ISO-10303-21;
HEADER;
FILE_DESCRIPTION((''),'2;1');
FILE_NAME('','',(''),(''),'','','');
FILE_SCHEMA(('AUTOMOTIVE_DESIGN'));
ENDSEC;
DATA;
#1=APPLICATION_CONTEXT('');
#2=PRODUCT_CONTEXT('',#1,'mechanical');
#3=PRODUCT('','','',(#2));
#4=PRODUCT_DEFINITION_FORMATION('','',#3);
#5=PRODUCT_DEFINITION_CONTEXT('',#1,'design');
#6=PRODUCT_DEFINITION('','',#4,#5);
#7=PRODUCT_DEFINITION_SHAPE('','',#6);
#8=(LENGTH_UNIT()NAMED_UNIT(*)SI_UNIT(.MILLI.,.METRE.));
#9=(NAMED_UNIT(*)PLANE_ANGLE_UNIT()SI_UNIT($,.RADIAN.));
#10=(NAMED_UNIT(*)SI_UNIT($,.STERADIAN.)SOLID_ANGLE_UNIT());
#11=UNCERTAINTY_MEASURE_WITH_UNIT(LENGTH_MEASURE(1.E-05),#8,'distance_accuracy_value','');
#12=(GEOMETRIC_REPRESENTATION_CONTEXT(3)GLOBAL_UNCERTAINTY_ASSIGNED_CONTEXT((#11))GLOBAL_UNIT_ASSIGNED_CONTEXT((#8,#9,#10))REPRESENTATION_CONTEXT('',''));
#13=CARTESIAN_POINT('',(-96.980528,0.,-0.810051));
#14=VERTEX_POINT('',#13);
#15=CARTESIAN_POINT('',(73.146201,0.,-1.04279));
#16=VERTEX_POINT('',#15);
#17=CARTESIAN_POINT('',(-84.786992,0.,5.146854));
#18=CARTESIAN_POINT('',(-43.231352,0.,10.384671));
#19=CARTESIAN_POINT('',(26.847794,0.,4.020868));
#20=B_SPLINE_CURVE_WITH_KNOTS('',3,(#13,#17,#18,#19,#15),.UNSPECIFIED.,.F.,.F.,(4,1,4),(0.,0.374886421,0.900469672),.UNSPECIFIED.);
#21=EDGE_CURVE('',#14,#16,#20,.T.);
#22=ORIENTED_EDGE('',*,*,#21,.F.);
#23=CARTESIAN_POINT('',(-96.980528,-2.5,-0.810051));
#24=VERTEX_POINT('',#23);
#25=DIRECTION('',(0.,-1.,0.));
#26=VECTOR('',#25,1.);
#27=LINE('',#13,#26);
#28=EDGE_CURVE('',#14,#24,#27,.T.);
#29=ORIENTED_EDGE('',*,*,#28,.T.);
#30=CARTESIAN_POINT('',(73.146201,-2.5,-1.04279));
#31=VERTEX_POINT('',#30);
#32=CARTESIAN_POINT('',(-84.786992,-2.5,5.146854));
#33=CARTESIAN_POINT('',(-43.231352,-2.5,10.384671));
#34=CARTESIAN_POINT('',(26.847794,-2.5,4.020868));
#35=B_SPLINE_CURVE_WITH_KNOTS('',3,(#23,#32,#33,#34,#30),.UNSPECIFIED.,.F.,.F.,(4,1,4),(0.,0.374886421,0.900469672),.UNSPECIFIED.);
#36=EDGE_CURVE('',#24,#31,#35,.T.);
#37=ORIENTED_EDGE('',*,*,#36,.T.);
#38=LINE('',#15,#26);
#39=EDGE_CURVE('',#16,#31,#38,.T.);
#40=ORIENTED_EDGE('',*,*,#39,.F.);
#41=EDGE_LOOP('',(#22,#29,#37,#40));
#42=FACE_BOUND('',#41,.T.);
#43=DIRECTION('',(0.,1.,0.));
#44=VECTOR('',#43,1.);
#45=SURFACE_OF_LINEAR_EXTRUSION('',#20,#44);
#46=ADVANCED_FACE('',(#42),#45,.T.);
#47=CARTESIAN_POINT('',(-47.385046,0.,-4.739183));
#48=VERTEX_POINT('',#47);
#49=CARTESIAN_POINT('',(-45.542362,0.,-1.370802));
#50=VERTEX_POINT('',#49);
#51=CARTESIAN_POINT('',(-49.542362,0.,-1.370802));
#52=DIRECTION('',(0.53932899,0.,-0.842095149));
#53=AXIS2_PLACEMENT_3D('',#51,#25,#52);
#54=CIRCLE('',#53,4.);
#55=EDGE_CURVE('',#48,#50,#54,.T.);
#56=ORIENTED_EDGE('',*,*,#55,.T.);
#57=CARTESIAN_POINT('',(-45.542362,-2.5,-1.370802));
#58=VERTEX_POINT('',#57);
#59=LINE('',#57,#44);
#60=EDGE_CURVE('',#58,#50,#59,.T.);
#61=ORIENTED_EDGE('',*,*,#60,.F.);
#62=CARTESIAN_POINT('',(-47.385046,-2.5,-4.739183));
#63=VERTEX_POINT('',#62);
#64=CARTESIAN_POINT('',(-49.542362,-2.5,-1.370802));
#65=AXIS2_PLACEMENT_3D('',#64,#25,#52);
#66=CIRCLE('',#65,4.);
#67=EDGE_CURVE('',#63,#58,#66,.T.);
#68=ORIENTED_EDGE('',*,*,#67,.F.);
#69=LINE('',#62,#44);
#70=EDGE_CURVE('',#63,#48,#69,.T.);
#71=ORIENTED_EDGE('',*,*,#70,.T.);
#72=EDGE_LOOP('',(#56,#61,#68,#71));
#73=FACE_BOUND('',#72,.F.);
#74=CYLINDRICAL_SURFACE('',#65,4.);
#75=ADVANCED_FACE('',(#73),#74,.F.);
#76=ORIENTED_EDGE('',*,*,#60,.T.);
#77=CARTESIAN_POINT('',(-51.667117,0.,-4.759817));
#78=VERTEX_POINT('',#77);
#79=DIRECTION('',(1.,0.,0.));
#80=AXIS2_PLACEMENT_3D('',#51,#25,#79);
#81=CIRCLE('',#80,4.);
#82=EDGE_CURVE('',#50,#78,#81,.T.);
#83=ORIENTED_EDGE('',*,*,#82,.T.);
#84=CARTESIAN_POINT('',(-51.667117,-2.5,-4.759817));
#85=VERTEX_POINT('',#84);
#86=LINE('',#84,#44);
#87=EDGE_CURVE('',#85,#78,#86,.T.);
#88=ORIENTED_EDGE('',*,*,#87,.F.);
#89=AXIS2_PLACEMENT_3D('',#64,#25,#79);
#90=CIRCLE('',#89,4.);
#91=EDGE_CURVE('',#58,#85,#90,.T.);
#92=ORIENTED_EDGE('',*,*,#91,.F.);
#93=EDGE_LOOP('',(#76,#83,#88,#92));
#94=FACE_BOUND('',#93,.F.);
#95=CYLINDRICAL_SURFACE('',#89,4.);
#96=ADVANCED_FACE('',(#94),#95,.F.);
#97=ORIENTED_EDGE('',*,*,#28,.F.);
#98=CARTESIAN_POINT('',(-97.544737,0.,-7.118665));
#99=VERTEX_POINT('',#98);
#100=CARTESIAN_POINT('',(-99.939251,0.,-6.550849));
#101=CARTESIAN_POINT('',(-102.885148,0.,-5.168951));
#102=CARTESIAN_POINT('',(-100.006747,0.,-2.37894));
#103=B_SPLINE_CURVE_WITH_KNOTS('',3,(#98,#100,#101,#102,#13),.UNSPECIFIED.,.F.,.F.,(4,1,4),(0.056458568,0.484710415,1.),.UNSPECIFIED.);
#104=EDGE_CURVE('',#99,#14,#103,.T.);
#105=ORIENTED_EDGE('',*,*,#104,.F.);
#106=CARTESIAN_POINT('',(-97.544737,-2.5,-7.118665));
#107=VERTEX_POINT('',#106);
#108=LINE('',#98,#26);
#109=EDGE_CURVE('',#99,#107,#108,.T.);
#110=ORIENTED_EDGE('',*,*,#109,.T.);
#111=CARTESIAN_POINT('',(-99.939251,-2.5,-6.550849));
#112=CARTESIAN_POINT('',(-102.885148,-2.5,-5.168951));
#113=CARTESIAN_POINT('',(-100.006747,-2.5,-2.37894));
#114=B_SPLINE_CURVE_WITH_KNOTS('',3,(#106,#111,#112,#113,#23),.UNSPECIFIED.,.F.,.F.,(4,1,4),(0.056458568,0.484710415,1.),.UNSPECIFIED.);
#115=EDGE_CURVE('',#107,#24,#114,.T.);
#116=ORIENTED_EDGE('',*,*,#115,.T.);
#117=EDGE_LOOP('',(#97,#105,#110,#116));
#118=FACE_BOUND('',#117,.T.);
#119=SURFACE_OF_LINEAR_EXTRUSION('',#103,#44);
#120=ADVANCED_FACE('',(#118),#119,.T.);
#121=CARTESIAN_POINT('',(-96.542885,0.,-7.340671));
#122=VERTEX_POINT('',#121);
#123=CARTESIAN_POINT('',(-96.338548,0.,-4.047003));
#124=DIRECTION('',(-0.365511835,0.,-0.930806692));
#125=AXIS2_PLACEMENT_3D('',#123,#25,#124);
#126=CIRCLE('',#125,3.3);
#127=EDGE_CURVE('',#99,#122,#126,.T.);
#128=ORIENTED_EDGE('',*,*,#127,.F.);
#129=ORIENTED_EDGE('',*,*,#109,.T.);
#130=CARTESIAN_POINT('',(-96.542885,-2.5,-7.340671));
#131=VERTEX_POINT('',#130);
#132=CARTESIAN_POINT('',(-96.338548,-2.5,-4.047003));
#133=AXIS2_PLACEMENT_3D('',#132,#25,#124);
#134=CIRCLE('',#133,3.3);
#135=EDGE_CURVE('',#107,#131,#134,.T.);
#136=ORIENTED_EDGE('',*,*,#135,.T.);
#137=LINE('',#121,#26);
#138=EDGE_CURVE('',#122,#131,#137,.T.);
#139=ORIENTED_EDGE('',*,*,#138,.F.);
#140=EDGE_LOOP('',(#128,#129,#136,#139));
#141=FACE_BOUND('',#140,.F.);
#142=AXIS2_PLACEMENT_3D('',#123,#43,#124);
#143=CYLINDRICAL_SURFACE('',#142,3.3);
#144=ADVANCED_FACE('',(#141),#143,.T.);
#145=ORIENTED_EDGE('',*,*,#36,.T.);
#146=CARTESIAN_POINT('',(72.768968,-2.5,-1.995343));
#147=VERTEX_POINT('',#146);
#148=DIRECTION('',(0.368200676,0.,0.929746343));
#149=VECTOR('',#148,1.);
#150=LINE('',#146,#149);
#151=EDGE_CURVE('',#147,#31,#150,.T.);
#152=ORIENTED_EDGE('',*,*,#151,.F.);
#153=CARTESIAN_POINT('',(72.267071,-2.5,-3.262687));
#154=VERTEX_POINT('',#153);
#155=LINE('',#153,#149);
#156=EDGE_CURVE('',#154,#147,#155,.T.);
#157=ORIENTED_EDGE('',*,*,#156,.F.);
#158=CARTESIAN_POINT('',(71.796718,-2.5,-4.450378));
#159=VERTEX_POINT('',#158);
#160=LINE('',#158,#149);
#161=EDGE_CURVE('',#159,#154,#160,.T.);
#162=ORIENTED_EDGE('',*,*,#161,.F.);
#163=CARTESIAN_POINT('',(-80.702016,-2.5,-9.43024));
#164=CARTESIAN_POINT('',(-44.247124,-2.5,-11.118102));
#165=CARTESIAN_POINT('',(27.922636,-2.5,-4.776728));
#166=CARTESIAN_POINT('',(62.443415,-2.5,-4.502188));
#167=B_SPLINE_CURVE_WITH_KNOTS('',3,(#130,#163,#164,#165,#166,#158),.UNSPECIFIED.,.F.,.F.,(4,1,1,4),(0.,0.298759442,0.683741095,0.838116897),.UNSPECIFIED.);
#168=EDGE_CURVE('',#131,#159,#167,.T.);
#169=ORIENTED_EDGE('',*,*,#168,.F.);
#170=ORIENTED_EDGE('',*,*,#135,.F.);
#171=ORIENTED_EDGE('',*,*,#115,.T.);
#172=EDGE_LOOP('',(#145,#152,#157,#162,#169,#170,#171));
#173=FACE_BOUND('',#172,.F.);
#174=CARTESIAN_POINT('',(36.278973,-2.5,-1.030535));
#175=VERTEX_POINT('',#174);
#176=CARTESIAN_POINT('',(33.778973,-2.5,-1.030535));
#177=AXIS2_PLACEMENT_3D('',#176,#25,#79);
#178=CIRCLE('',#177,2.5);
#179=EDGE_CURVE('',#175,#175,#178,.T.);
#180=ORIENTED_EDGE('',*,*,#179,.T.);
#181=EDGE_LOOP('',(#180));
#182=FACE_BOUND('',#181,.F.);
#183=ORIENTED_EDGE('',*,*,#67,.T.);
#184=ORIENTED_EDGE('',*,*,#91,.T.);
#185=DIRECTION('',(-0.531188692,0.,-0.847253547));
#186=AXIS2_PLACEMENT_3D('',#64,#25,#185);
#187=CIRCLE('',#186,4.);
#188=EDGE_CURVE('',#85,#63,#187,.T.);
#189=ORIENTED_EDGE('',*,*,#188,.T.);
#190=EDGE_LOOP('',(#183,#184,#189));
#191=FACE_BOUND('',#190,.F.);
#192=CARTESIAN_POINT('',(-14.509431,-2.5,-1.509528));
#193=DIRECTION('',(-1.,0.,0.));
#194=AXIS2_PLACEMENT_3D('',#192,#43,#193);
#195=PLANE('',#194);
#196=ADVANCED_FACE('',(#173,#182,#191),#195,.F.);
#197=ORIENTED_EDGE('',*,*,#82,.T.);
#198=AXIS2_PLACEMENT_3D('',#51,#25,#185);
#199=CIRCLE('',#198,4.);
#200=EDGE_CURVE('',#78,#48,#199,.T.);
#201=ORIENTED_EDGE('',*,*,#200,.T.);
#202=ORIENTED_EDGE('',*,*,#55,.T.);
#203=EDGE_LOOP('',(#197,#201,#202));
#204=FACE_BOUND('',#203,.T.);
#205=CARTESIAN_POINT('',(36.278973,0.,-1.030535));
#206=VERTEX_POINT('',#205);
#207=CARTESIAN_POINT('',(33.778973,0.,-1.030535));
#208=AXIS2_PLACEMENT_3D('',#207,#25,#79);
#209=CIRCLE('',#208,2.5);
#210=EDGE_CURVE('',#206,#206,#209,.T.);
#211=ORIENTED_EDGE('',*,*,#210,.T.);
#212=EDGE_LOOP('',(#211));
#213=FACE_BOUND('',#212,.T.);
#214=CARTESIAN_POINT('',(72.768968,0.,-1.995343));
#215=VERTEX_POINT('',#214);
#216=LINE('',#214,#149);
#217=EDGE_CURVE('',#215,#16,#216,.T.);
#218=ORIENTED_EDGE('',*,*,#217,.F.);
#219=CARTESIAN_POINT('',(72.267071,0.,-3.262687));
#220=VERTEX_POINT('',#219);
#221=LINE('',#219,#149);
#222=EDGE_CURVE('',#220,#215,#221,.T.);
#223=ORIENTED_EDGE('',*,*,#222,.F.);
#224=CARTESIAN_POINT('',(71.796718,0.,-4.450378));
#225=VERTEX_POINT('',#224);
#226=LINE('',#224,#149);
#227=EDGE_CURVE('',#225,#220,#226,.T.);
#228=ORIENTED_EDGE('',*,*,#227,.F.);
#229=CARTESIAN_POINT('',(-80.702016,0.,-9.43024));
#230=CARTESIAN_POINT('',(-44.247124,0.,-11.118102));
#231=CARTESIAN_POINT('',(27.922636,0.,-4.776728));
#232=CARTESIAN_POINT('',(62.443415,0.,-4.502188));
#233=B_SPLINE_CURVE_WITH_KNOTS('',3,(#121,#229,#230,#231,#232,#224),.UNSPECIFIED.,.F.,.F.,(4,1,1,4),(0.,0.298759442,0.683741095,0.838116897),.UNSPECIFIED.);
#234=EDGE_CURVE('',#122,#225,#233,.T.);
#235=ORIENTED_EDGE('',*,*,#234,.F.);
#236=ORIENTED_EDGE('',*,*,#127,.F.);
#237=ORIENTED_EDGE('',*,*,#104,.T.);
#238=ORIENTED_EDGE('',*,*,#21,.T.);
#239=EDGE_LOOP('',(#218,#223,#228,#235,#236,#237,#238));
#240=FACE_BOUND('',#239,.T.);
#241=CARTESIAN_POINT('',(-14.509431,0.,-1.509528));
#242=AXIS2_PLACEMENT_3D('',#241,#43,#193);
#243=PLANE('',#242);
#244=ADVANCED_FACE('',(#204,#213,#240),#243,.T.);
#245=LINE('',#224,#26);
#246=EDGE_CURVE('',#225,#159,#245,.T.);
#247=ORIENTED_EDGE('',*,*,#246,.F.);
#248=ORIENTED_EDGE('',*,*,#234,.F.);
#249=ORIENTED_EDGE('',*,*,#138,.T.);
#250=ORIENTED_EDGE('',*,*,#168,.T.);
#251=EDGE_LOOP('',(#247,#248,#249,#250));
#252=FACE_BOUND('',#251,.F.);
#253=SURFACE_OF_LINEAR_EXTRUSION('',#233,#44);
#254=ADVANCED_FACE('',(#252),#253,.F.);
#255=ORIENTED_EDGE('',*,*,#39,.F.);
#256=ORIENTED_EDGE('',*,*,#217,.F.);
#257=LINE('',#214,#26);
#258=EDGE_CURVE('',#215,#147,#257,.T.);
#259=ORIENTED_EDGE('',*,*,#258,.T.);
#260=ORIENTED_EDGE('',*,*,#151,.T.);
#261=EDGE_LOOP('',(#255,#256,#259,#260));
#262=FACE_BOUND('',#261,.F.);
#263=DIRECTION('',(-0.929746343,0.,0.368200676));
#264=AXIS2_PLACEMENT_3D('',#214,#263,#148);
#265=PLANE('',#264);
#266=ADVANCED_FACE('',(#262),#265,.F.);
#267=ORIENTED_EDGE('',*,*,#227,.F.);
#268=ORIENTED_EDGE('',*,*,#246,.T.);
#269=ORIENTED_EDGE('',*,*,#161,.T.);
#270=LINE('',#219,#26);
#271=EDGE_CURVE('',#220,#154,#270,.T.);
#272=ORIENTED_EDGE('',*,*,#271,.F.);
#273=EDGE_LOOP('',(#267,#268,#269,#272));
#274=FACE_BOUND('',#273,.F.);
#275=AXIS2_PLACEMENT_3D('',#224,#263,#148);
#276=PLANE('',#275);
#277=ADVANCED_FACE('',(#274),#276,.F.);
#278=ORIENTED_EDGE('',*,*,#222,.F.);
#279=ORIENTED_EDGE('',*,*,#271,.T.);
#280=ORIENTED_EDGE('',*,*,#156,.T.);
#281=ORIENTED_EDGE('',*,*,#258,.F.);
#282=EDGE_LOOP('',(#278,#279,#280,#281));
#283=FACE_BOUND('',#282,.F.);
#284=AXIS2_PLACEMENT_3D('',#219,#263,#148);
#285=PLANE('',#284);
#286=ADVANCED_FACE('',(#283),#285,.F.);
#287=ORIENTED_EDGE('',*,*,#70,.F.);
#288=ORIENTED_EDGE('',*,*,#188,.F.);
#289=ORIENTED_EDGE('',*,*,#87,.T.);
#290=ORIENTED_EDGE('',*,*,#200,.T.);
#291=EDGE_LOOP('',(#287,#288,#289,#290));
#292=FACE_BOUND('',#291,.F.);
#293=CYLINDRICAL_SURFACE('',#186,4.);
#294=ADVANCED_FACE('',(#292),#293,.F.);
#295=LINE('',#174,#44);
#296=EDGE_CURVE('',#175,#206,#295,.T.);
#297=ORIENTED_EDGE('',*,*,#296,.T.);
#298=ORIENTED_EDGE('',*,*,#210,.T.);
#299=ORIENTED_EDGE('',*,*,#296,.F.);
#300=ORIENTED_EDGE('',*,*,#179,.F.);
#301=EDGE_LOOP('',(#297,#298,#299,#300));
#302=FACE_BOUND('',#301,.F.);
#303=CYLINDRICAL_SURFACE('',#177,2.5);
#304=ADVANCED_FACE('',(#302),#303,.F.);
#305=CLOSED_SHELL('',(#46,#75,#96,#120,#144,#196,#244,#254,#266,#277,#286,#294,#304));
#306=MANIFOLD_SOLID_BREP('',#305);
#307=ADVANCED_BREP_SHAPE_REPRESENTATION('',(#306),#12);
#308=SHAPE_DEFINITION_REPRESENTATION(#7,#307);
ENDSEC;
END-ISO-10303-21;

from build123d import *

# Parameters (mm, degrees)
F2_DEPTH = 2.5
F1_R     = 2.5
F3_DEPTH = 3
F4_DEPTH = 3


with BuildPart() as f2:
    # F0 (on Front) → F2 (new body)
    with BuildSketch(Plane.XZ):
        with BuildLine():
            add(Edge.make_bspline(
                [(-96.9805282175, -0.8100506688), (-84.7869920978, 5.1468541776), (-43.2313518226, 10.3846705605), (26.8477938201, 4.0208678603), (73.1462007926, -1.0427900778)],
                knots=[0, 0, 0, 0, 0.374886421, 0.9004696716, 0.9004696716, 0.9004696716, 0.9004696716], degree=3))
            add(Edge.make_bspline(
                [(-97.5447368223, -7.1186651935), (-99.939251346, -6.5508492693), (-102.885147974, -5.168950634), (-100.0067471137, -2.3789404522), (-96.9805282175, -0.8100506688)],
                knots=[0.0564585679, 0.0564585679, 0.0564585679, 0.0564585679, 0.4847104148, 1, 1, 1, 1], degree=3))
            add(Edge.make_bspline(
                [(-96.5428845142, -7.3406707446), (-96.8949965543, -7.2673488468), (-97.22905608, -7.1935231869), (-97.5447368223, -7.1186651935)],
                knots=[0, 0, 0, 0, 0.0564585679, 0.0564585679, 0.0564585679, 0.0564585679], degree=3))
            add(Edge.make_bspline(
                [(-96.5428845142, -7.3406707446), (-80.7020161693, -9.4302402111), (-44.2471235075, -11.1181020976), (27.9226364637, -4.7767282079), (62.4434148738, -4.5021877215), (71.7967184236, -4.4503783305)],
                knots=[0, 0, 0, 0, 0.2987594418, 0.6837410955, 0.8381168975, 0.8381168975, 0.8381168975, 0.8381168975], degree=3))
            Line((71.7967184236, -4.4503783305), (72.2670713195, -3.2626866351))
            add(Edge.make_bspline(
                [(-97.3825784566, -6.0471531808), (-82.3468325761, -8.841713568), (-44.2551066449, -8.6286827794), (32.5707299039, -3.8332069517), (63.1103828262, -3.2710139005), (72.2670713195, -3.2626866351)],
                knots=[0, 0, 0, 0, 0.3131273629, 0.7122131732, 0.9019797674, 0.9019797674, 0.9019797674, 0.9019797674], degree=3))
            add(Edge.make_bspline(
                [(-97.3825784566, -6.0471531808), (-98.6588937786, -5.8946130057), (-100.1661659123, -5.1778479876), (-99.9138553768, -4.2244412327), (-99.8196757147, -4.047003109)],
                knots=[0, 0, 0, 0, 0.4440177242, 0.5425000514, 0.5425000514, 0.5425000514, 0.5425000514], degree=3))
            add(Edge.make_bspline(
                [(-99.8196757147, -4.047003109), (-99.3821638101, -3.2227137691), (-97.9006497107, -2.3042858417), (-96.3385477662, -1.6362179573)],
                knots=[0.5425000514, 0.5425000514, 0.5425000514, 0.5425000514, 1, 1, 1, 1], degree=3))
            add(Edge.make_bspline(
                [(-96.3385477662, -1.6362179573), (-85.7442874691, 3.2900694446), (-41.4192830911, 9.6956733525), (28.5693195485, 2.5855104747), (72.7689680214, -1.9953434339)],
                knots=[0, 0, 0, 0, 0.384923117, 0.9441251659, 0.9441251659, 0.9441251659, 0.9441251659], degree=3))
            Line((72.7689680214, -1.9953434339), (73.1462007926, -1.0427900778))
        make_face()
        with BuildLine():
            add(Edge.make_bspline(
                [(-96.5428845142, -7.3406707446), (-96.8949965543, -7.2673488468), (-97.22905608, -7.1935231869), (-97.5447368223, -7.1186651935)],
                knots=[0, 0, 0, 0, 0.0564585679, 0.0564585679, 0.0564585679, 0.0564585679], degree=3))
            ThreePointArc((-97.5447368223, -7.1186651935), (-97.052492706, -7.2688477084), (-96.5428845142, -7.3406707446))
        make_face()
        with BuildLine():
            Line((72.2670713195, -3.2626866351), (72.7689680214, -1.9953434339))
            add(Edge.make_bspline(
                [(-96.3385477662, -1.6362179573), (-85.7442874691, 3.2900694446), (-41.4192830911, 9.6956733525), (28.5693195485, 2.5855104747), (72.7689680214, -1.9953434339)],
                knots=[0, 0, 0, 0, 0.384923117, 0.9441251659, 0.9441251659, 0.9441251659, 0.9441251659], degree=3))
            add(Edge.make_bspline(
                [(-99.8196757147, -4.047003109), (-99.3821638101, -3.2227137691), (-97.9006497107, -2.3042858417), (-96.3385477662, -1.6362179573)],
                knots=[0.5425000514, 0.5425000514, 0.5425000514, 0.5425000514, 1, 1, 1, 1], degree=3))
            add(Edge.make_bspline(
                [(-97.3825784566, -6.0471531808), (-98.6588937786, -5.8946130057), (-100.1661659123, -5.1778479876), (-99.9138553768, -4.2244412327), (-99.8196757147, -4.047003109)],
                knots=[0, 0, 0, 0, 0.4440177242, 0.5425000514, 0.5425000514, 0.5425000514, 0.5425000514], degree=3))
            add(Edge.make_bspline(
                [(-97.3825784566, -6.0471531808), (-82.3468325761, -8.841713568), (-44.2551066449, -8.6286827794), (32.5707299039, -3.8332069517), (63.1103828262, -3.2710139005), (72.2670713195, -3.2626866351)],
                knots=[0, 0, 0, 0, 0.3131273629, 0.7122131732, 0.9019797674, 0.9019797674, 0.9019797674, 0.9019797674], degree=3))
        make_face()
    extrude(amount=F2_DEPTH)


with BuildPart() as f2b:
    # F1 (on Front) → F2, piece 2 (new body)
    with BuildSketch(Plane.XZ):
        with BuildLine():
            ThreePointArc((-45.542362095, -1.3708024857), (-51.4789804014, 2.1291274472), (-51.6671168627, -4.7598166753))
            Line((-51.6671168627, -4.7598166753), (-47.385046135, -4.7391830831))
            ThreePointArc((-47.385046135, -4.7391830831), (-46.0331411102, -3.2905337378), (-45.542362095, -1.3708024857))
        make_face()
        with BuildLine():
            Line((-47.385046135, -4.7391830831), (-51.6671168627, -4.7598166753))
            ThreePointArc((-51.6671168627, -4.7598166753), (-49.523087913, -5.3707560487), (-47.385046135, -4.7391830831))
        make_face()
    extrude(amount=F2_DEPTH)


with BuildPart() as f2c:
    # F1 (on Front) → F2, piece 3 (new body)
    with BuildSketch(Plane.XZ):
        with Locations((33.7789729238, -1.0305350879)):
            Circle(F1_R)
    extrude(amount=F2_DEPTH)


with BuildPart() as f3_tool:
    # F3 (cut): a face of the model
    f3_faces = [f2b.part.faces().sort_by_distance(p)[0] for p in [
        (-49.542362095, -2.5, -1.3708024857),
    ]]
    extrude(f3_faces, amount=-F3_DEPTH)


with BuildPart() as f2_1:
    add(f2.part)

    # F3: cut by f3_tool
    add(f3_tool.part, mode=Mode.SUBTRACT)


with BuildPart() as f2b_1:
    add(f2b.part)

    # F3: cut by f3_tool
    add(f3_tool.part, mode=Mode.SUBTRACT)


with BuildPart() as f4_tool:
    # F4 (cut): a face of the model
    f4_faces = [f2c.part.faces().sort_by_distance(p)[0] for p in [
        (33.7789729238, -2.5, -1.0305350879),
    ]]
    extrude(f4_faces, amount=-F4_DEPTH)


with BuildPart() as f2_2:
    add(f2_1.part)

    # F4: cut by f4_tool
    add(f4_tool.part, mode=Mode.SUBTRACT)


with BuildPart() as f2c_1:
    add(f2c.part)

    # F4: cut by f4_tool
    add(f4_tool.part, mode=Mode.SUBTRACT)


solid = f2_2.part
